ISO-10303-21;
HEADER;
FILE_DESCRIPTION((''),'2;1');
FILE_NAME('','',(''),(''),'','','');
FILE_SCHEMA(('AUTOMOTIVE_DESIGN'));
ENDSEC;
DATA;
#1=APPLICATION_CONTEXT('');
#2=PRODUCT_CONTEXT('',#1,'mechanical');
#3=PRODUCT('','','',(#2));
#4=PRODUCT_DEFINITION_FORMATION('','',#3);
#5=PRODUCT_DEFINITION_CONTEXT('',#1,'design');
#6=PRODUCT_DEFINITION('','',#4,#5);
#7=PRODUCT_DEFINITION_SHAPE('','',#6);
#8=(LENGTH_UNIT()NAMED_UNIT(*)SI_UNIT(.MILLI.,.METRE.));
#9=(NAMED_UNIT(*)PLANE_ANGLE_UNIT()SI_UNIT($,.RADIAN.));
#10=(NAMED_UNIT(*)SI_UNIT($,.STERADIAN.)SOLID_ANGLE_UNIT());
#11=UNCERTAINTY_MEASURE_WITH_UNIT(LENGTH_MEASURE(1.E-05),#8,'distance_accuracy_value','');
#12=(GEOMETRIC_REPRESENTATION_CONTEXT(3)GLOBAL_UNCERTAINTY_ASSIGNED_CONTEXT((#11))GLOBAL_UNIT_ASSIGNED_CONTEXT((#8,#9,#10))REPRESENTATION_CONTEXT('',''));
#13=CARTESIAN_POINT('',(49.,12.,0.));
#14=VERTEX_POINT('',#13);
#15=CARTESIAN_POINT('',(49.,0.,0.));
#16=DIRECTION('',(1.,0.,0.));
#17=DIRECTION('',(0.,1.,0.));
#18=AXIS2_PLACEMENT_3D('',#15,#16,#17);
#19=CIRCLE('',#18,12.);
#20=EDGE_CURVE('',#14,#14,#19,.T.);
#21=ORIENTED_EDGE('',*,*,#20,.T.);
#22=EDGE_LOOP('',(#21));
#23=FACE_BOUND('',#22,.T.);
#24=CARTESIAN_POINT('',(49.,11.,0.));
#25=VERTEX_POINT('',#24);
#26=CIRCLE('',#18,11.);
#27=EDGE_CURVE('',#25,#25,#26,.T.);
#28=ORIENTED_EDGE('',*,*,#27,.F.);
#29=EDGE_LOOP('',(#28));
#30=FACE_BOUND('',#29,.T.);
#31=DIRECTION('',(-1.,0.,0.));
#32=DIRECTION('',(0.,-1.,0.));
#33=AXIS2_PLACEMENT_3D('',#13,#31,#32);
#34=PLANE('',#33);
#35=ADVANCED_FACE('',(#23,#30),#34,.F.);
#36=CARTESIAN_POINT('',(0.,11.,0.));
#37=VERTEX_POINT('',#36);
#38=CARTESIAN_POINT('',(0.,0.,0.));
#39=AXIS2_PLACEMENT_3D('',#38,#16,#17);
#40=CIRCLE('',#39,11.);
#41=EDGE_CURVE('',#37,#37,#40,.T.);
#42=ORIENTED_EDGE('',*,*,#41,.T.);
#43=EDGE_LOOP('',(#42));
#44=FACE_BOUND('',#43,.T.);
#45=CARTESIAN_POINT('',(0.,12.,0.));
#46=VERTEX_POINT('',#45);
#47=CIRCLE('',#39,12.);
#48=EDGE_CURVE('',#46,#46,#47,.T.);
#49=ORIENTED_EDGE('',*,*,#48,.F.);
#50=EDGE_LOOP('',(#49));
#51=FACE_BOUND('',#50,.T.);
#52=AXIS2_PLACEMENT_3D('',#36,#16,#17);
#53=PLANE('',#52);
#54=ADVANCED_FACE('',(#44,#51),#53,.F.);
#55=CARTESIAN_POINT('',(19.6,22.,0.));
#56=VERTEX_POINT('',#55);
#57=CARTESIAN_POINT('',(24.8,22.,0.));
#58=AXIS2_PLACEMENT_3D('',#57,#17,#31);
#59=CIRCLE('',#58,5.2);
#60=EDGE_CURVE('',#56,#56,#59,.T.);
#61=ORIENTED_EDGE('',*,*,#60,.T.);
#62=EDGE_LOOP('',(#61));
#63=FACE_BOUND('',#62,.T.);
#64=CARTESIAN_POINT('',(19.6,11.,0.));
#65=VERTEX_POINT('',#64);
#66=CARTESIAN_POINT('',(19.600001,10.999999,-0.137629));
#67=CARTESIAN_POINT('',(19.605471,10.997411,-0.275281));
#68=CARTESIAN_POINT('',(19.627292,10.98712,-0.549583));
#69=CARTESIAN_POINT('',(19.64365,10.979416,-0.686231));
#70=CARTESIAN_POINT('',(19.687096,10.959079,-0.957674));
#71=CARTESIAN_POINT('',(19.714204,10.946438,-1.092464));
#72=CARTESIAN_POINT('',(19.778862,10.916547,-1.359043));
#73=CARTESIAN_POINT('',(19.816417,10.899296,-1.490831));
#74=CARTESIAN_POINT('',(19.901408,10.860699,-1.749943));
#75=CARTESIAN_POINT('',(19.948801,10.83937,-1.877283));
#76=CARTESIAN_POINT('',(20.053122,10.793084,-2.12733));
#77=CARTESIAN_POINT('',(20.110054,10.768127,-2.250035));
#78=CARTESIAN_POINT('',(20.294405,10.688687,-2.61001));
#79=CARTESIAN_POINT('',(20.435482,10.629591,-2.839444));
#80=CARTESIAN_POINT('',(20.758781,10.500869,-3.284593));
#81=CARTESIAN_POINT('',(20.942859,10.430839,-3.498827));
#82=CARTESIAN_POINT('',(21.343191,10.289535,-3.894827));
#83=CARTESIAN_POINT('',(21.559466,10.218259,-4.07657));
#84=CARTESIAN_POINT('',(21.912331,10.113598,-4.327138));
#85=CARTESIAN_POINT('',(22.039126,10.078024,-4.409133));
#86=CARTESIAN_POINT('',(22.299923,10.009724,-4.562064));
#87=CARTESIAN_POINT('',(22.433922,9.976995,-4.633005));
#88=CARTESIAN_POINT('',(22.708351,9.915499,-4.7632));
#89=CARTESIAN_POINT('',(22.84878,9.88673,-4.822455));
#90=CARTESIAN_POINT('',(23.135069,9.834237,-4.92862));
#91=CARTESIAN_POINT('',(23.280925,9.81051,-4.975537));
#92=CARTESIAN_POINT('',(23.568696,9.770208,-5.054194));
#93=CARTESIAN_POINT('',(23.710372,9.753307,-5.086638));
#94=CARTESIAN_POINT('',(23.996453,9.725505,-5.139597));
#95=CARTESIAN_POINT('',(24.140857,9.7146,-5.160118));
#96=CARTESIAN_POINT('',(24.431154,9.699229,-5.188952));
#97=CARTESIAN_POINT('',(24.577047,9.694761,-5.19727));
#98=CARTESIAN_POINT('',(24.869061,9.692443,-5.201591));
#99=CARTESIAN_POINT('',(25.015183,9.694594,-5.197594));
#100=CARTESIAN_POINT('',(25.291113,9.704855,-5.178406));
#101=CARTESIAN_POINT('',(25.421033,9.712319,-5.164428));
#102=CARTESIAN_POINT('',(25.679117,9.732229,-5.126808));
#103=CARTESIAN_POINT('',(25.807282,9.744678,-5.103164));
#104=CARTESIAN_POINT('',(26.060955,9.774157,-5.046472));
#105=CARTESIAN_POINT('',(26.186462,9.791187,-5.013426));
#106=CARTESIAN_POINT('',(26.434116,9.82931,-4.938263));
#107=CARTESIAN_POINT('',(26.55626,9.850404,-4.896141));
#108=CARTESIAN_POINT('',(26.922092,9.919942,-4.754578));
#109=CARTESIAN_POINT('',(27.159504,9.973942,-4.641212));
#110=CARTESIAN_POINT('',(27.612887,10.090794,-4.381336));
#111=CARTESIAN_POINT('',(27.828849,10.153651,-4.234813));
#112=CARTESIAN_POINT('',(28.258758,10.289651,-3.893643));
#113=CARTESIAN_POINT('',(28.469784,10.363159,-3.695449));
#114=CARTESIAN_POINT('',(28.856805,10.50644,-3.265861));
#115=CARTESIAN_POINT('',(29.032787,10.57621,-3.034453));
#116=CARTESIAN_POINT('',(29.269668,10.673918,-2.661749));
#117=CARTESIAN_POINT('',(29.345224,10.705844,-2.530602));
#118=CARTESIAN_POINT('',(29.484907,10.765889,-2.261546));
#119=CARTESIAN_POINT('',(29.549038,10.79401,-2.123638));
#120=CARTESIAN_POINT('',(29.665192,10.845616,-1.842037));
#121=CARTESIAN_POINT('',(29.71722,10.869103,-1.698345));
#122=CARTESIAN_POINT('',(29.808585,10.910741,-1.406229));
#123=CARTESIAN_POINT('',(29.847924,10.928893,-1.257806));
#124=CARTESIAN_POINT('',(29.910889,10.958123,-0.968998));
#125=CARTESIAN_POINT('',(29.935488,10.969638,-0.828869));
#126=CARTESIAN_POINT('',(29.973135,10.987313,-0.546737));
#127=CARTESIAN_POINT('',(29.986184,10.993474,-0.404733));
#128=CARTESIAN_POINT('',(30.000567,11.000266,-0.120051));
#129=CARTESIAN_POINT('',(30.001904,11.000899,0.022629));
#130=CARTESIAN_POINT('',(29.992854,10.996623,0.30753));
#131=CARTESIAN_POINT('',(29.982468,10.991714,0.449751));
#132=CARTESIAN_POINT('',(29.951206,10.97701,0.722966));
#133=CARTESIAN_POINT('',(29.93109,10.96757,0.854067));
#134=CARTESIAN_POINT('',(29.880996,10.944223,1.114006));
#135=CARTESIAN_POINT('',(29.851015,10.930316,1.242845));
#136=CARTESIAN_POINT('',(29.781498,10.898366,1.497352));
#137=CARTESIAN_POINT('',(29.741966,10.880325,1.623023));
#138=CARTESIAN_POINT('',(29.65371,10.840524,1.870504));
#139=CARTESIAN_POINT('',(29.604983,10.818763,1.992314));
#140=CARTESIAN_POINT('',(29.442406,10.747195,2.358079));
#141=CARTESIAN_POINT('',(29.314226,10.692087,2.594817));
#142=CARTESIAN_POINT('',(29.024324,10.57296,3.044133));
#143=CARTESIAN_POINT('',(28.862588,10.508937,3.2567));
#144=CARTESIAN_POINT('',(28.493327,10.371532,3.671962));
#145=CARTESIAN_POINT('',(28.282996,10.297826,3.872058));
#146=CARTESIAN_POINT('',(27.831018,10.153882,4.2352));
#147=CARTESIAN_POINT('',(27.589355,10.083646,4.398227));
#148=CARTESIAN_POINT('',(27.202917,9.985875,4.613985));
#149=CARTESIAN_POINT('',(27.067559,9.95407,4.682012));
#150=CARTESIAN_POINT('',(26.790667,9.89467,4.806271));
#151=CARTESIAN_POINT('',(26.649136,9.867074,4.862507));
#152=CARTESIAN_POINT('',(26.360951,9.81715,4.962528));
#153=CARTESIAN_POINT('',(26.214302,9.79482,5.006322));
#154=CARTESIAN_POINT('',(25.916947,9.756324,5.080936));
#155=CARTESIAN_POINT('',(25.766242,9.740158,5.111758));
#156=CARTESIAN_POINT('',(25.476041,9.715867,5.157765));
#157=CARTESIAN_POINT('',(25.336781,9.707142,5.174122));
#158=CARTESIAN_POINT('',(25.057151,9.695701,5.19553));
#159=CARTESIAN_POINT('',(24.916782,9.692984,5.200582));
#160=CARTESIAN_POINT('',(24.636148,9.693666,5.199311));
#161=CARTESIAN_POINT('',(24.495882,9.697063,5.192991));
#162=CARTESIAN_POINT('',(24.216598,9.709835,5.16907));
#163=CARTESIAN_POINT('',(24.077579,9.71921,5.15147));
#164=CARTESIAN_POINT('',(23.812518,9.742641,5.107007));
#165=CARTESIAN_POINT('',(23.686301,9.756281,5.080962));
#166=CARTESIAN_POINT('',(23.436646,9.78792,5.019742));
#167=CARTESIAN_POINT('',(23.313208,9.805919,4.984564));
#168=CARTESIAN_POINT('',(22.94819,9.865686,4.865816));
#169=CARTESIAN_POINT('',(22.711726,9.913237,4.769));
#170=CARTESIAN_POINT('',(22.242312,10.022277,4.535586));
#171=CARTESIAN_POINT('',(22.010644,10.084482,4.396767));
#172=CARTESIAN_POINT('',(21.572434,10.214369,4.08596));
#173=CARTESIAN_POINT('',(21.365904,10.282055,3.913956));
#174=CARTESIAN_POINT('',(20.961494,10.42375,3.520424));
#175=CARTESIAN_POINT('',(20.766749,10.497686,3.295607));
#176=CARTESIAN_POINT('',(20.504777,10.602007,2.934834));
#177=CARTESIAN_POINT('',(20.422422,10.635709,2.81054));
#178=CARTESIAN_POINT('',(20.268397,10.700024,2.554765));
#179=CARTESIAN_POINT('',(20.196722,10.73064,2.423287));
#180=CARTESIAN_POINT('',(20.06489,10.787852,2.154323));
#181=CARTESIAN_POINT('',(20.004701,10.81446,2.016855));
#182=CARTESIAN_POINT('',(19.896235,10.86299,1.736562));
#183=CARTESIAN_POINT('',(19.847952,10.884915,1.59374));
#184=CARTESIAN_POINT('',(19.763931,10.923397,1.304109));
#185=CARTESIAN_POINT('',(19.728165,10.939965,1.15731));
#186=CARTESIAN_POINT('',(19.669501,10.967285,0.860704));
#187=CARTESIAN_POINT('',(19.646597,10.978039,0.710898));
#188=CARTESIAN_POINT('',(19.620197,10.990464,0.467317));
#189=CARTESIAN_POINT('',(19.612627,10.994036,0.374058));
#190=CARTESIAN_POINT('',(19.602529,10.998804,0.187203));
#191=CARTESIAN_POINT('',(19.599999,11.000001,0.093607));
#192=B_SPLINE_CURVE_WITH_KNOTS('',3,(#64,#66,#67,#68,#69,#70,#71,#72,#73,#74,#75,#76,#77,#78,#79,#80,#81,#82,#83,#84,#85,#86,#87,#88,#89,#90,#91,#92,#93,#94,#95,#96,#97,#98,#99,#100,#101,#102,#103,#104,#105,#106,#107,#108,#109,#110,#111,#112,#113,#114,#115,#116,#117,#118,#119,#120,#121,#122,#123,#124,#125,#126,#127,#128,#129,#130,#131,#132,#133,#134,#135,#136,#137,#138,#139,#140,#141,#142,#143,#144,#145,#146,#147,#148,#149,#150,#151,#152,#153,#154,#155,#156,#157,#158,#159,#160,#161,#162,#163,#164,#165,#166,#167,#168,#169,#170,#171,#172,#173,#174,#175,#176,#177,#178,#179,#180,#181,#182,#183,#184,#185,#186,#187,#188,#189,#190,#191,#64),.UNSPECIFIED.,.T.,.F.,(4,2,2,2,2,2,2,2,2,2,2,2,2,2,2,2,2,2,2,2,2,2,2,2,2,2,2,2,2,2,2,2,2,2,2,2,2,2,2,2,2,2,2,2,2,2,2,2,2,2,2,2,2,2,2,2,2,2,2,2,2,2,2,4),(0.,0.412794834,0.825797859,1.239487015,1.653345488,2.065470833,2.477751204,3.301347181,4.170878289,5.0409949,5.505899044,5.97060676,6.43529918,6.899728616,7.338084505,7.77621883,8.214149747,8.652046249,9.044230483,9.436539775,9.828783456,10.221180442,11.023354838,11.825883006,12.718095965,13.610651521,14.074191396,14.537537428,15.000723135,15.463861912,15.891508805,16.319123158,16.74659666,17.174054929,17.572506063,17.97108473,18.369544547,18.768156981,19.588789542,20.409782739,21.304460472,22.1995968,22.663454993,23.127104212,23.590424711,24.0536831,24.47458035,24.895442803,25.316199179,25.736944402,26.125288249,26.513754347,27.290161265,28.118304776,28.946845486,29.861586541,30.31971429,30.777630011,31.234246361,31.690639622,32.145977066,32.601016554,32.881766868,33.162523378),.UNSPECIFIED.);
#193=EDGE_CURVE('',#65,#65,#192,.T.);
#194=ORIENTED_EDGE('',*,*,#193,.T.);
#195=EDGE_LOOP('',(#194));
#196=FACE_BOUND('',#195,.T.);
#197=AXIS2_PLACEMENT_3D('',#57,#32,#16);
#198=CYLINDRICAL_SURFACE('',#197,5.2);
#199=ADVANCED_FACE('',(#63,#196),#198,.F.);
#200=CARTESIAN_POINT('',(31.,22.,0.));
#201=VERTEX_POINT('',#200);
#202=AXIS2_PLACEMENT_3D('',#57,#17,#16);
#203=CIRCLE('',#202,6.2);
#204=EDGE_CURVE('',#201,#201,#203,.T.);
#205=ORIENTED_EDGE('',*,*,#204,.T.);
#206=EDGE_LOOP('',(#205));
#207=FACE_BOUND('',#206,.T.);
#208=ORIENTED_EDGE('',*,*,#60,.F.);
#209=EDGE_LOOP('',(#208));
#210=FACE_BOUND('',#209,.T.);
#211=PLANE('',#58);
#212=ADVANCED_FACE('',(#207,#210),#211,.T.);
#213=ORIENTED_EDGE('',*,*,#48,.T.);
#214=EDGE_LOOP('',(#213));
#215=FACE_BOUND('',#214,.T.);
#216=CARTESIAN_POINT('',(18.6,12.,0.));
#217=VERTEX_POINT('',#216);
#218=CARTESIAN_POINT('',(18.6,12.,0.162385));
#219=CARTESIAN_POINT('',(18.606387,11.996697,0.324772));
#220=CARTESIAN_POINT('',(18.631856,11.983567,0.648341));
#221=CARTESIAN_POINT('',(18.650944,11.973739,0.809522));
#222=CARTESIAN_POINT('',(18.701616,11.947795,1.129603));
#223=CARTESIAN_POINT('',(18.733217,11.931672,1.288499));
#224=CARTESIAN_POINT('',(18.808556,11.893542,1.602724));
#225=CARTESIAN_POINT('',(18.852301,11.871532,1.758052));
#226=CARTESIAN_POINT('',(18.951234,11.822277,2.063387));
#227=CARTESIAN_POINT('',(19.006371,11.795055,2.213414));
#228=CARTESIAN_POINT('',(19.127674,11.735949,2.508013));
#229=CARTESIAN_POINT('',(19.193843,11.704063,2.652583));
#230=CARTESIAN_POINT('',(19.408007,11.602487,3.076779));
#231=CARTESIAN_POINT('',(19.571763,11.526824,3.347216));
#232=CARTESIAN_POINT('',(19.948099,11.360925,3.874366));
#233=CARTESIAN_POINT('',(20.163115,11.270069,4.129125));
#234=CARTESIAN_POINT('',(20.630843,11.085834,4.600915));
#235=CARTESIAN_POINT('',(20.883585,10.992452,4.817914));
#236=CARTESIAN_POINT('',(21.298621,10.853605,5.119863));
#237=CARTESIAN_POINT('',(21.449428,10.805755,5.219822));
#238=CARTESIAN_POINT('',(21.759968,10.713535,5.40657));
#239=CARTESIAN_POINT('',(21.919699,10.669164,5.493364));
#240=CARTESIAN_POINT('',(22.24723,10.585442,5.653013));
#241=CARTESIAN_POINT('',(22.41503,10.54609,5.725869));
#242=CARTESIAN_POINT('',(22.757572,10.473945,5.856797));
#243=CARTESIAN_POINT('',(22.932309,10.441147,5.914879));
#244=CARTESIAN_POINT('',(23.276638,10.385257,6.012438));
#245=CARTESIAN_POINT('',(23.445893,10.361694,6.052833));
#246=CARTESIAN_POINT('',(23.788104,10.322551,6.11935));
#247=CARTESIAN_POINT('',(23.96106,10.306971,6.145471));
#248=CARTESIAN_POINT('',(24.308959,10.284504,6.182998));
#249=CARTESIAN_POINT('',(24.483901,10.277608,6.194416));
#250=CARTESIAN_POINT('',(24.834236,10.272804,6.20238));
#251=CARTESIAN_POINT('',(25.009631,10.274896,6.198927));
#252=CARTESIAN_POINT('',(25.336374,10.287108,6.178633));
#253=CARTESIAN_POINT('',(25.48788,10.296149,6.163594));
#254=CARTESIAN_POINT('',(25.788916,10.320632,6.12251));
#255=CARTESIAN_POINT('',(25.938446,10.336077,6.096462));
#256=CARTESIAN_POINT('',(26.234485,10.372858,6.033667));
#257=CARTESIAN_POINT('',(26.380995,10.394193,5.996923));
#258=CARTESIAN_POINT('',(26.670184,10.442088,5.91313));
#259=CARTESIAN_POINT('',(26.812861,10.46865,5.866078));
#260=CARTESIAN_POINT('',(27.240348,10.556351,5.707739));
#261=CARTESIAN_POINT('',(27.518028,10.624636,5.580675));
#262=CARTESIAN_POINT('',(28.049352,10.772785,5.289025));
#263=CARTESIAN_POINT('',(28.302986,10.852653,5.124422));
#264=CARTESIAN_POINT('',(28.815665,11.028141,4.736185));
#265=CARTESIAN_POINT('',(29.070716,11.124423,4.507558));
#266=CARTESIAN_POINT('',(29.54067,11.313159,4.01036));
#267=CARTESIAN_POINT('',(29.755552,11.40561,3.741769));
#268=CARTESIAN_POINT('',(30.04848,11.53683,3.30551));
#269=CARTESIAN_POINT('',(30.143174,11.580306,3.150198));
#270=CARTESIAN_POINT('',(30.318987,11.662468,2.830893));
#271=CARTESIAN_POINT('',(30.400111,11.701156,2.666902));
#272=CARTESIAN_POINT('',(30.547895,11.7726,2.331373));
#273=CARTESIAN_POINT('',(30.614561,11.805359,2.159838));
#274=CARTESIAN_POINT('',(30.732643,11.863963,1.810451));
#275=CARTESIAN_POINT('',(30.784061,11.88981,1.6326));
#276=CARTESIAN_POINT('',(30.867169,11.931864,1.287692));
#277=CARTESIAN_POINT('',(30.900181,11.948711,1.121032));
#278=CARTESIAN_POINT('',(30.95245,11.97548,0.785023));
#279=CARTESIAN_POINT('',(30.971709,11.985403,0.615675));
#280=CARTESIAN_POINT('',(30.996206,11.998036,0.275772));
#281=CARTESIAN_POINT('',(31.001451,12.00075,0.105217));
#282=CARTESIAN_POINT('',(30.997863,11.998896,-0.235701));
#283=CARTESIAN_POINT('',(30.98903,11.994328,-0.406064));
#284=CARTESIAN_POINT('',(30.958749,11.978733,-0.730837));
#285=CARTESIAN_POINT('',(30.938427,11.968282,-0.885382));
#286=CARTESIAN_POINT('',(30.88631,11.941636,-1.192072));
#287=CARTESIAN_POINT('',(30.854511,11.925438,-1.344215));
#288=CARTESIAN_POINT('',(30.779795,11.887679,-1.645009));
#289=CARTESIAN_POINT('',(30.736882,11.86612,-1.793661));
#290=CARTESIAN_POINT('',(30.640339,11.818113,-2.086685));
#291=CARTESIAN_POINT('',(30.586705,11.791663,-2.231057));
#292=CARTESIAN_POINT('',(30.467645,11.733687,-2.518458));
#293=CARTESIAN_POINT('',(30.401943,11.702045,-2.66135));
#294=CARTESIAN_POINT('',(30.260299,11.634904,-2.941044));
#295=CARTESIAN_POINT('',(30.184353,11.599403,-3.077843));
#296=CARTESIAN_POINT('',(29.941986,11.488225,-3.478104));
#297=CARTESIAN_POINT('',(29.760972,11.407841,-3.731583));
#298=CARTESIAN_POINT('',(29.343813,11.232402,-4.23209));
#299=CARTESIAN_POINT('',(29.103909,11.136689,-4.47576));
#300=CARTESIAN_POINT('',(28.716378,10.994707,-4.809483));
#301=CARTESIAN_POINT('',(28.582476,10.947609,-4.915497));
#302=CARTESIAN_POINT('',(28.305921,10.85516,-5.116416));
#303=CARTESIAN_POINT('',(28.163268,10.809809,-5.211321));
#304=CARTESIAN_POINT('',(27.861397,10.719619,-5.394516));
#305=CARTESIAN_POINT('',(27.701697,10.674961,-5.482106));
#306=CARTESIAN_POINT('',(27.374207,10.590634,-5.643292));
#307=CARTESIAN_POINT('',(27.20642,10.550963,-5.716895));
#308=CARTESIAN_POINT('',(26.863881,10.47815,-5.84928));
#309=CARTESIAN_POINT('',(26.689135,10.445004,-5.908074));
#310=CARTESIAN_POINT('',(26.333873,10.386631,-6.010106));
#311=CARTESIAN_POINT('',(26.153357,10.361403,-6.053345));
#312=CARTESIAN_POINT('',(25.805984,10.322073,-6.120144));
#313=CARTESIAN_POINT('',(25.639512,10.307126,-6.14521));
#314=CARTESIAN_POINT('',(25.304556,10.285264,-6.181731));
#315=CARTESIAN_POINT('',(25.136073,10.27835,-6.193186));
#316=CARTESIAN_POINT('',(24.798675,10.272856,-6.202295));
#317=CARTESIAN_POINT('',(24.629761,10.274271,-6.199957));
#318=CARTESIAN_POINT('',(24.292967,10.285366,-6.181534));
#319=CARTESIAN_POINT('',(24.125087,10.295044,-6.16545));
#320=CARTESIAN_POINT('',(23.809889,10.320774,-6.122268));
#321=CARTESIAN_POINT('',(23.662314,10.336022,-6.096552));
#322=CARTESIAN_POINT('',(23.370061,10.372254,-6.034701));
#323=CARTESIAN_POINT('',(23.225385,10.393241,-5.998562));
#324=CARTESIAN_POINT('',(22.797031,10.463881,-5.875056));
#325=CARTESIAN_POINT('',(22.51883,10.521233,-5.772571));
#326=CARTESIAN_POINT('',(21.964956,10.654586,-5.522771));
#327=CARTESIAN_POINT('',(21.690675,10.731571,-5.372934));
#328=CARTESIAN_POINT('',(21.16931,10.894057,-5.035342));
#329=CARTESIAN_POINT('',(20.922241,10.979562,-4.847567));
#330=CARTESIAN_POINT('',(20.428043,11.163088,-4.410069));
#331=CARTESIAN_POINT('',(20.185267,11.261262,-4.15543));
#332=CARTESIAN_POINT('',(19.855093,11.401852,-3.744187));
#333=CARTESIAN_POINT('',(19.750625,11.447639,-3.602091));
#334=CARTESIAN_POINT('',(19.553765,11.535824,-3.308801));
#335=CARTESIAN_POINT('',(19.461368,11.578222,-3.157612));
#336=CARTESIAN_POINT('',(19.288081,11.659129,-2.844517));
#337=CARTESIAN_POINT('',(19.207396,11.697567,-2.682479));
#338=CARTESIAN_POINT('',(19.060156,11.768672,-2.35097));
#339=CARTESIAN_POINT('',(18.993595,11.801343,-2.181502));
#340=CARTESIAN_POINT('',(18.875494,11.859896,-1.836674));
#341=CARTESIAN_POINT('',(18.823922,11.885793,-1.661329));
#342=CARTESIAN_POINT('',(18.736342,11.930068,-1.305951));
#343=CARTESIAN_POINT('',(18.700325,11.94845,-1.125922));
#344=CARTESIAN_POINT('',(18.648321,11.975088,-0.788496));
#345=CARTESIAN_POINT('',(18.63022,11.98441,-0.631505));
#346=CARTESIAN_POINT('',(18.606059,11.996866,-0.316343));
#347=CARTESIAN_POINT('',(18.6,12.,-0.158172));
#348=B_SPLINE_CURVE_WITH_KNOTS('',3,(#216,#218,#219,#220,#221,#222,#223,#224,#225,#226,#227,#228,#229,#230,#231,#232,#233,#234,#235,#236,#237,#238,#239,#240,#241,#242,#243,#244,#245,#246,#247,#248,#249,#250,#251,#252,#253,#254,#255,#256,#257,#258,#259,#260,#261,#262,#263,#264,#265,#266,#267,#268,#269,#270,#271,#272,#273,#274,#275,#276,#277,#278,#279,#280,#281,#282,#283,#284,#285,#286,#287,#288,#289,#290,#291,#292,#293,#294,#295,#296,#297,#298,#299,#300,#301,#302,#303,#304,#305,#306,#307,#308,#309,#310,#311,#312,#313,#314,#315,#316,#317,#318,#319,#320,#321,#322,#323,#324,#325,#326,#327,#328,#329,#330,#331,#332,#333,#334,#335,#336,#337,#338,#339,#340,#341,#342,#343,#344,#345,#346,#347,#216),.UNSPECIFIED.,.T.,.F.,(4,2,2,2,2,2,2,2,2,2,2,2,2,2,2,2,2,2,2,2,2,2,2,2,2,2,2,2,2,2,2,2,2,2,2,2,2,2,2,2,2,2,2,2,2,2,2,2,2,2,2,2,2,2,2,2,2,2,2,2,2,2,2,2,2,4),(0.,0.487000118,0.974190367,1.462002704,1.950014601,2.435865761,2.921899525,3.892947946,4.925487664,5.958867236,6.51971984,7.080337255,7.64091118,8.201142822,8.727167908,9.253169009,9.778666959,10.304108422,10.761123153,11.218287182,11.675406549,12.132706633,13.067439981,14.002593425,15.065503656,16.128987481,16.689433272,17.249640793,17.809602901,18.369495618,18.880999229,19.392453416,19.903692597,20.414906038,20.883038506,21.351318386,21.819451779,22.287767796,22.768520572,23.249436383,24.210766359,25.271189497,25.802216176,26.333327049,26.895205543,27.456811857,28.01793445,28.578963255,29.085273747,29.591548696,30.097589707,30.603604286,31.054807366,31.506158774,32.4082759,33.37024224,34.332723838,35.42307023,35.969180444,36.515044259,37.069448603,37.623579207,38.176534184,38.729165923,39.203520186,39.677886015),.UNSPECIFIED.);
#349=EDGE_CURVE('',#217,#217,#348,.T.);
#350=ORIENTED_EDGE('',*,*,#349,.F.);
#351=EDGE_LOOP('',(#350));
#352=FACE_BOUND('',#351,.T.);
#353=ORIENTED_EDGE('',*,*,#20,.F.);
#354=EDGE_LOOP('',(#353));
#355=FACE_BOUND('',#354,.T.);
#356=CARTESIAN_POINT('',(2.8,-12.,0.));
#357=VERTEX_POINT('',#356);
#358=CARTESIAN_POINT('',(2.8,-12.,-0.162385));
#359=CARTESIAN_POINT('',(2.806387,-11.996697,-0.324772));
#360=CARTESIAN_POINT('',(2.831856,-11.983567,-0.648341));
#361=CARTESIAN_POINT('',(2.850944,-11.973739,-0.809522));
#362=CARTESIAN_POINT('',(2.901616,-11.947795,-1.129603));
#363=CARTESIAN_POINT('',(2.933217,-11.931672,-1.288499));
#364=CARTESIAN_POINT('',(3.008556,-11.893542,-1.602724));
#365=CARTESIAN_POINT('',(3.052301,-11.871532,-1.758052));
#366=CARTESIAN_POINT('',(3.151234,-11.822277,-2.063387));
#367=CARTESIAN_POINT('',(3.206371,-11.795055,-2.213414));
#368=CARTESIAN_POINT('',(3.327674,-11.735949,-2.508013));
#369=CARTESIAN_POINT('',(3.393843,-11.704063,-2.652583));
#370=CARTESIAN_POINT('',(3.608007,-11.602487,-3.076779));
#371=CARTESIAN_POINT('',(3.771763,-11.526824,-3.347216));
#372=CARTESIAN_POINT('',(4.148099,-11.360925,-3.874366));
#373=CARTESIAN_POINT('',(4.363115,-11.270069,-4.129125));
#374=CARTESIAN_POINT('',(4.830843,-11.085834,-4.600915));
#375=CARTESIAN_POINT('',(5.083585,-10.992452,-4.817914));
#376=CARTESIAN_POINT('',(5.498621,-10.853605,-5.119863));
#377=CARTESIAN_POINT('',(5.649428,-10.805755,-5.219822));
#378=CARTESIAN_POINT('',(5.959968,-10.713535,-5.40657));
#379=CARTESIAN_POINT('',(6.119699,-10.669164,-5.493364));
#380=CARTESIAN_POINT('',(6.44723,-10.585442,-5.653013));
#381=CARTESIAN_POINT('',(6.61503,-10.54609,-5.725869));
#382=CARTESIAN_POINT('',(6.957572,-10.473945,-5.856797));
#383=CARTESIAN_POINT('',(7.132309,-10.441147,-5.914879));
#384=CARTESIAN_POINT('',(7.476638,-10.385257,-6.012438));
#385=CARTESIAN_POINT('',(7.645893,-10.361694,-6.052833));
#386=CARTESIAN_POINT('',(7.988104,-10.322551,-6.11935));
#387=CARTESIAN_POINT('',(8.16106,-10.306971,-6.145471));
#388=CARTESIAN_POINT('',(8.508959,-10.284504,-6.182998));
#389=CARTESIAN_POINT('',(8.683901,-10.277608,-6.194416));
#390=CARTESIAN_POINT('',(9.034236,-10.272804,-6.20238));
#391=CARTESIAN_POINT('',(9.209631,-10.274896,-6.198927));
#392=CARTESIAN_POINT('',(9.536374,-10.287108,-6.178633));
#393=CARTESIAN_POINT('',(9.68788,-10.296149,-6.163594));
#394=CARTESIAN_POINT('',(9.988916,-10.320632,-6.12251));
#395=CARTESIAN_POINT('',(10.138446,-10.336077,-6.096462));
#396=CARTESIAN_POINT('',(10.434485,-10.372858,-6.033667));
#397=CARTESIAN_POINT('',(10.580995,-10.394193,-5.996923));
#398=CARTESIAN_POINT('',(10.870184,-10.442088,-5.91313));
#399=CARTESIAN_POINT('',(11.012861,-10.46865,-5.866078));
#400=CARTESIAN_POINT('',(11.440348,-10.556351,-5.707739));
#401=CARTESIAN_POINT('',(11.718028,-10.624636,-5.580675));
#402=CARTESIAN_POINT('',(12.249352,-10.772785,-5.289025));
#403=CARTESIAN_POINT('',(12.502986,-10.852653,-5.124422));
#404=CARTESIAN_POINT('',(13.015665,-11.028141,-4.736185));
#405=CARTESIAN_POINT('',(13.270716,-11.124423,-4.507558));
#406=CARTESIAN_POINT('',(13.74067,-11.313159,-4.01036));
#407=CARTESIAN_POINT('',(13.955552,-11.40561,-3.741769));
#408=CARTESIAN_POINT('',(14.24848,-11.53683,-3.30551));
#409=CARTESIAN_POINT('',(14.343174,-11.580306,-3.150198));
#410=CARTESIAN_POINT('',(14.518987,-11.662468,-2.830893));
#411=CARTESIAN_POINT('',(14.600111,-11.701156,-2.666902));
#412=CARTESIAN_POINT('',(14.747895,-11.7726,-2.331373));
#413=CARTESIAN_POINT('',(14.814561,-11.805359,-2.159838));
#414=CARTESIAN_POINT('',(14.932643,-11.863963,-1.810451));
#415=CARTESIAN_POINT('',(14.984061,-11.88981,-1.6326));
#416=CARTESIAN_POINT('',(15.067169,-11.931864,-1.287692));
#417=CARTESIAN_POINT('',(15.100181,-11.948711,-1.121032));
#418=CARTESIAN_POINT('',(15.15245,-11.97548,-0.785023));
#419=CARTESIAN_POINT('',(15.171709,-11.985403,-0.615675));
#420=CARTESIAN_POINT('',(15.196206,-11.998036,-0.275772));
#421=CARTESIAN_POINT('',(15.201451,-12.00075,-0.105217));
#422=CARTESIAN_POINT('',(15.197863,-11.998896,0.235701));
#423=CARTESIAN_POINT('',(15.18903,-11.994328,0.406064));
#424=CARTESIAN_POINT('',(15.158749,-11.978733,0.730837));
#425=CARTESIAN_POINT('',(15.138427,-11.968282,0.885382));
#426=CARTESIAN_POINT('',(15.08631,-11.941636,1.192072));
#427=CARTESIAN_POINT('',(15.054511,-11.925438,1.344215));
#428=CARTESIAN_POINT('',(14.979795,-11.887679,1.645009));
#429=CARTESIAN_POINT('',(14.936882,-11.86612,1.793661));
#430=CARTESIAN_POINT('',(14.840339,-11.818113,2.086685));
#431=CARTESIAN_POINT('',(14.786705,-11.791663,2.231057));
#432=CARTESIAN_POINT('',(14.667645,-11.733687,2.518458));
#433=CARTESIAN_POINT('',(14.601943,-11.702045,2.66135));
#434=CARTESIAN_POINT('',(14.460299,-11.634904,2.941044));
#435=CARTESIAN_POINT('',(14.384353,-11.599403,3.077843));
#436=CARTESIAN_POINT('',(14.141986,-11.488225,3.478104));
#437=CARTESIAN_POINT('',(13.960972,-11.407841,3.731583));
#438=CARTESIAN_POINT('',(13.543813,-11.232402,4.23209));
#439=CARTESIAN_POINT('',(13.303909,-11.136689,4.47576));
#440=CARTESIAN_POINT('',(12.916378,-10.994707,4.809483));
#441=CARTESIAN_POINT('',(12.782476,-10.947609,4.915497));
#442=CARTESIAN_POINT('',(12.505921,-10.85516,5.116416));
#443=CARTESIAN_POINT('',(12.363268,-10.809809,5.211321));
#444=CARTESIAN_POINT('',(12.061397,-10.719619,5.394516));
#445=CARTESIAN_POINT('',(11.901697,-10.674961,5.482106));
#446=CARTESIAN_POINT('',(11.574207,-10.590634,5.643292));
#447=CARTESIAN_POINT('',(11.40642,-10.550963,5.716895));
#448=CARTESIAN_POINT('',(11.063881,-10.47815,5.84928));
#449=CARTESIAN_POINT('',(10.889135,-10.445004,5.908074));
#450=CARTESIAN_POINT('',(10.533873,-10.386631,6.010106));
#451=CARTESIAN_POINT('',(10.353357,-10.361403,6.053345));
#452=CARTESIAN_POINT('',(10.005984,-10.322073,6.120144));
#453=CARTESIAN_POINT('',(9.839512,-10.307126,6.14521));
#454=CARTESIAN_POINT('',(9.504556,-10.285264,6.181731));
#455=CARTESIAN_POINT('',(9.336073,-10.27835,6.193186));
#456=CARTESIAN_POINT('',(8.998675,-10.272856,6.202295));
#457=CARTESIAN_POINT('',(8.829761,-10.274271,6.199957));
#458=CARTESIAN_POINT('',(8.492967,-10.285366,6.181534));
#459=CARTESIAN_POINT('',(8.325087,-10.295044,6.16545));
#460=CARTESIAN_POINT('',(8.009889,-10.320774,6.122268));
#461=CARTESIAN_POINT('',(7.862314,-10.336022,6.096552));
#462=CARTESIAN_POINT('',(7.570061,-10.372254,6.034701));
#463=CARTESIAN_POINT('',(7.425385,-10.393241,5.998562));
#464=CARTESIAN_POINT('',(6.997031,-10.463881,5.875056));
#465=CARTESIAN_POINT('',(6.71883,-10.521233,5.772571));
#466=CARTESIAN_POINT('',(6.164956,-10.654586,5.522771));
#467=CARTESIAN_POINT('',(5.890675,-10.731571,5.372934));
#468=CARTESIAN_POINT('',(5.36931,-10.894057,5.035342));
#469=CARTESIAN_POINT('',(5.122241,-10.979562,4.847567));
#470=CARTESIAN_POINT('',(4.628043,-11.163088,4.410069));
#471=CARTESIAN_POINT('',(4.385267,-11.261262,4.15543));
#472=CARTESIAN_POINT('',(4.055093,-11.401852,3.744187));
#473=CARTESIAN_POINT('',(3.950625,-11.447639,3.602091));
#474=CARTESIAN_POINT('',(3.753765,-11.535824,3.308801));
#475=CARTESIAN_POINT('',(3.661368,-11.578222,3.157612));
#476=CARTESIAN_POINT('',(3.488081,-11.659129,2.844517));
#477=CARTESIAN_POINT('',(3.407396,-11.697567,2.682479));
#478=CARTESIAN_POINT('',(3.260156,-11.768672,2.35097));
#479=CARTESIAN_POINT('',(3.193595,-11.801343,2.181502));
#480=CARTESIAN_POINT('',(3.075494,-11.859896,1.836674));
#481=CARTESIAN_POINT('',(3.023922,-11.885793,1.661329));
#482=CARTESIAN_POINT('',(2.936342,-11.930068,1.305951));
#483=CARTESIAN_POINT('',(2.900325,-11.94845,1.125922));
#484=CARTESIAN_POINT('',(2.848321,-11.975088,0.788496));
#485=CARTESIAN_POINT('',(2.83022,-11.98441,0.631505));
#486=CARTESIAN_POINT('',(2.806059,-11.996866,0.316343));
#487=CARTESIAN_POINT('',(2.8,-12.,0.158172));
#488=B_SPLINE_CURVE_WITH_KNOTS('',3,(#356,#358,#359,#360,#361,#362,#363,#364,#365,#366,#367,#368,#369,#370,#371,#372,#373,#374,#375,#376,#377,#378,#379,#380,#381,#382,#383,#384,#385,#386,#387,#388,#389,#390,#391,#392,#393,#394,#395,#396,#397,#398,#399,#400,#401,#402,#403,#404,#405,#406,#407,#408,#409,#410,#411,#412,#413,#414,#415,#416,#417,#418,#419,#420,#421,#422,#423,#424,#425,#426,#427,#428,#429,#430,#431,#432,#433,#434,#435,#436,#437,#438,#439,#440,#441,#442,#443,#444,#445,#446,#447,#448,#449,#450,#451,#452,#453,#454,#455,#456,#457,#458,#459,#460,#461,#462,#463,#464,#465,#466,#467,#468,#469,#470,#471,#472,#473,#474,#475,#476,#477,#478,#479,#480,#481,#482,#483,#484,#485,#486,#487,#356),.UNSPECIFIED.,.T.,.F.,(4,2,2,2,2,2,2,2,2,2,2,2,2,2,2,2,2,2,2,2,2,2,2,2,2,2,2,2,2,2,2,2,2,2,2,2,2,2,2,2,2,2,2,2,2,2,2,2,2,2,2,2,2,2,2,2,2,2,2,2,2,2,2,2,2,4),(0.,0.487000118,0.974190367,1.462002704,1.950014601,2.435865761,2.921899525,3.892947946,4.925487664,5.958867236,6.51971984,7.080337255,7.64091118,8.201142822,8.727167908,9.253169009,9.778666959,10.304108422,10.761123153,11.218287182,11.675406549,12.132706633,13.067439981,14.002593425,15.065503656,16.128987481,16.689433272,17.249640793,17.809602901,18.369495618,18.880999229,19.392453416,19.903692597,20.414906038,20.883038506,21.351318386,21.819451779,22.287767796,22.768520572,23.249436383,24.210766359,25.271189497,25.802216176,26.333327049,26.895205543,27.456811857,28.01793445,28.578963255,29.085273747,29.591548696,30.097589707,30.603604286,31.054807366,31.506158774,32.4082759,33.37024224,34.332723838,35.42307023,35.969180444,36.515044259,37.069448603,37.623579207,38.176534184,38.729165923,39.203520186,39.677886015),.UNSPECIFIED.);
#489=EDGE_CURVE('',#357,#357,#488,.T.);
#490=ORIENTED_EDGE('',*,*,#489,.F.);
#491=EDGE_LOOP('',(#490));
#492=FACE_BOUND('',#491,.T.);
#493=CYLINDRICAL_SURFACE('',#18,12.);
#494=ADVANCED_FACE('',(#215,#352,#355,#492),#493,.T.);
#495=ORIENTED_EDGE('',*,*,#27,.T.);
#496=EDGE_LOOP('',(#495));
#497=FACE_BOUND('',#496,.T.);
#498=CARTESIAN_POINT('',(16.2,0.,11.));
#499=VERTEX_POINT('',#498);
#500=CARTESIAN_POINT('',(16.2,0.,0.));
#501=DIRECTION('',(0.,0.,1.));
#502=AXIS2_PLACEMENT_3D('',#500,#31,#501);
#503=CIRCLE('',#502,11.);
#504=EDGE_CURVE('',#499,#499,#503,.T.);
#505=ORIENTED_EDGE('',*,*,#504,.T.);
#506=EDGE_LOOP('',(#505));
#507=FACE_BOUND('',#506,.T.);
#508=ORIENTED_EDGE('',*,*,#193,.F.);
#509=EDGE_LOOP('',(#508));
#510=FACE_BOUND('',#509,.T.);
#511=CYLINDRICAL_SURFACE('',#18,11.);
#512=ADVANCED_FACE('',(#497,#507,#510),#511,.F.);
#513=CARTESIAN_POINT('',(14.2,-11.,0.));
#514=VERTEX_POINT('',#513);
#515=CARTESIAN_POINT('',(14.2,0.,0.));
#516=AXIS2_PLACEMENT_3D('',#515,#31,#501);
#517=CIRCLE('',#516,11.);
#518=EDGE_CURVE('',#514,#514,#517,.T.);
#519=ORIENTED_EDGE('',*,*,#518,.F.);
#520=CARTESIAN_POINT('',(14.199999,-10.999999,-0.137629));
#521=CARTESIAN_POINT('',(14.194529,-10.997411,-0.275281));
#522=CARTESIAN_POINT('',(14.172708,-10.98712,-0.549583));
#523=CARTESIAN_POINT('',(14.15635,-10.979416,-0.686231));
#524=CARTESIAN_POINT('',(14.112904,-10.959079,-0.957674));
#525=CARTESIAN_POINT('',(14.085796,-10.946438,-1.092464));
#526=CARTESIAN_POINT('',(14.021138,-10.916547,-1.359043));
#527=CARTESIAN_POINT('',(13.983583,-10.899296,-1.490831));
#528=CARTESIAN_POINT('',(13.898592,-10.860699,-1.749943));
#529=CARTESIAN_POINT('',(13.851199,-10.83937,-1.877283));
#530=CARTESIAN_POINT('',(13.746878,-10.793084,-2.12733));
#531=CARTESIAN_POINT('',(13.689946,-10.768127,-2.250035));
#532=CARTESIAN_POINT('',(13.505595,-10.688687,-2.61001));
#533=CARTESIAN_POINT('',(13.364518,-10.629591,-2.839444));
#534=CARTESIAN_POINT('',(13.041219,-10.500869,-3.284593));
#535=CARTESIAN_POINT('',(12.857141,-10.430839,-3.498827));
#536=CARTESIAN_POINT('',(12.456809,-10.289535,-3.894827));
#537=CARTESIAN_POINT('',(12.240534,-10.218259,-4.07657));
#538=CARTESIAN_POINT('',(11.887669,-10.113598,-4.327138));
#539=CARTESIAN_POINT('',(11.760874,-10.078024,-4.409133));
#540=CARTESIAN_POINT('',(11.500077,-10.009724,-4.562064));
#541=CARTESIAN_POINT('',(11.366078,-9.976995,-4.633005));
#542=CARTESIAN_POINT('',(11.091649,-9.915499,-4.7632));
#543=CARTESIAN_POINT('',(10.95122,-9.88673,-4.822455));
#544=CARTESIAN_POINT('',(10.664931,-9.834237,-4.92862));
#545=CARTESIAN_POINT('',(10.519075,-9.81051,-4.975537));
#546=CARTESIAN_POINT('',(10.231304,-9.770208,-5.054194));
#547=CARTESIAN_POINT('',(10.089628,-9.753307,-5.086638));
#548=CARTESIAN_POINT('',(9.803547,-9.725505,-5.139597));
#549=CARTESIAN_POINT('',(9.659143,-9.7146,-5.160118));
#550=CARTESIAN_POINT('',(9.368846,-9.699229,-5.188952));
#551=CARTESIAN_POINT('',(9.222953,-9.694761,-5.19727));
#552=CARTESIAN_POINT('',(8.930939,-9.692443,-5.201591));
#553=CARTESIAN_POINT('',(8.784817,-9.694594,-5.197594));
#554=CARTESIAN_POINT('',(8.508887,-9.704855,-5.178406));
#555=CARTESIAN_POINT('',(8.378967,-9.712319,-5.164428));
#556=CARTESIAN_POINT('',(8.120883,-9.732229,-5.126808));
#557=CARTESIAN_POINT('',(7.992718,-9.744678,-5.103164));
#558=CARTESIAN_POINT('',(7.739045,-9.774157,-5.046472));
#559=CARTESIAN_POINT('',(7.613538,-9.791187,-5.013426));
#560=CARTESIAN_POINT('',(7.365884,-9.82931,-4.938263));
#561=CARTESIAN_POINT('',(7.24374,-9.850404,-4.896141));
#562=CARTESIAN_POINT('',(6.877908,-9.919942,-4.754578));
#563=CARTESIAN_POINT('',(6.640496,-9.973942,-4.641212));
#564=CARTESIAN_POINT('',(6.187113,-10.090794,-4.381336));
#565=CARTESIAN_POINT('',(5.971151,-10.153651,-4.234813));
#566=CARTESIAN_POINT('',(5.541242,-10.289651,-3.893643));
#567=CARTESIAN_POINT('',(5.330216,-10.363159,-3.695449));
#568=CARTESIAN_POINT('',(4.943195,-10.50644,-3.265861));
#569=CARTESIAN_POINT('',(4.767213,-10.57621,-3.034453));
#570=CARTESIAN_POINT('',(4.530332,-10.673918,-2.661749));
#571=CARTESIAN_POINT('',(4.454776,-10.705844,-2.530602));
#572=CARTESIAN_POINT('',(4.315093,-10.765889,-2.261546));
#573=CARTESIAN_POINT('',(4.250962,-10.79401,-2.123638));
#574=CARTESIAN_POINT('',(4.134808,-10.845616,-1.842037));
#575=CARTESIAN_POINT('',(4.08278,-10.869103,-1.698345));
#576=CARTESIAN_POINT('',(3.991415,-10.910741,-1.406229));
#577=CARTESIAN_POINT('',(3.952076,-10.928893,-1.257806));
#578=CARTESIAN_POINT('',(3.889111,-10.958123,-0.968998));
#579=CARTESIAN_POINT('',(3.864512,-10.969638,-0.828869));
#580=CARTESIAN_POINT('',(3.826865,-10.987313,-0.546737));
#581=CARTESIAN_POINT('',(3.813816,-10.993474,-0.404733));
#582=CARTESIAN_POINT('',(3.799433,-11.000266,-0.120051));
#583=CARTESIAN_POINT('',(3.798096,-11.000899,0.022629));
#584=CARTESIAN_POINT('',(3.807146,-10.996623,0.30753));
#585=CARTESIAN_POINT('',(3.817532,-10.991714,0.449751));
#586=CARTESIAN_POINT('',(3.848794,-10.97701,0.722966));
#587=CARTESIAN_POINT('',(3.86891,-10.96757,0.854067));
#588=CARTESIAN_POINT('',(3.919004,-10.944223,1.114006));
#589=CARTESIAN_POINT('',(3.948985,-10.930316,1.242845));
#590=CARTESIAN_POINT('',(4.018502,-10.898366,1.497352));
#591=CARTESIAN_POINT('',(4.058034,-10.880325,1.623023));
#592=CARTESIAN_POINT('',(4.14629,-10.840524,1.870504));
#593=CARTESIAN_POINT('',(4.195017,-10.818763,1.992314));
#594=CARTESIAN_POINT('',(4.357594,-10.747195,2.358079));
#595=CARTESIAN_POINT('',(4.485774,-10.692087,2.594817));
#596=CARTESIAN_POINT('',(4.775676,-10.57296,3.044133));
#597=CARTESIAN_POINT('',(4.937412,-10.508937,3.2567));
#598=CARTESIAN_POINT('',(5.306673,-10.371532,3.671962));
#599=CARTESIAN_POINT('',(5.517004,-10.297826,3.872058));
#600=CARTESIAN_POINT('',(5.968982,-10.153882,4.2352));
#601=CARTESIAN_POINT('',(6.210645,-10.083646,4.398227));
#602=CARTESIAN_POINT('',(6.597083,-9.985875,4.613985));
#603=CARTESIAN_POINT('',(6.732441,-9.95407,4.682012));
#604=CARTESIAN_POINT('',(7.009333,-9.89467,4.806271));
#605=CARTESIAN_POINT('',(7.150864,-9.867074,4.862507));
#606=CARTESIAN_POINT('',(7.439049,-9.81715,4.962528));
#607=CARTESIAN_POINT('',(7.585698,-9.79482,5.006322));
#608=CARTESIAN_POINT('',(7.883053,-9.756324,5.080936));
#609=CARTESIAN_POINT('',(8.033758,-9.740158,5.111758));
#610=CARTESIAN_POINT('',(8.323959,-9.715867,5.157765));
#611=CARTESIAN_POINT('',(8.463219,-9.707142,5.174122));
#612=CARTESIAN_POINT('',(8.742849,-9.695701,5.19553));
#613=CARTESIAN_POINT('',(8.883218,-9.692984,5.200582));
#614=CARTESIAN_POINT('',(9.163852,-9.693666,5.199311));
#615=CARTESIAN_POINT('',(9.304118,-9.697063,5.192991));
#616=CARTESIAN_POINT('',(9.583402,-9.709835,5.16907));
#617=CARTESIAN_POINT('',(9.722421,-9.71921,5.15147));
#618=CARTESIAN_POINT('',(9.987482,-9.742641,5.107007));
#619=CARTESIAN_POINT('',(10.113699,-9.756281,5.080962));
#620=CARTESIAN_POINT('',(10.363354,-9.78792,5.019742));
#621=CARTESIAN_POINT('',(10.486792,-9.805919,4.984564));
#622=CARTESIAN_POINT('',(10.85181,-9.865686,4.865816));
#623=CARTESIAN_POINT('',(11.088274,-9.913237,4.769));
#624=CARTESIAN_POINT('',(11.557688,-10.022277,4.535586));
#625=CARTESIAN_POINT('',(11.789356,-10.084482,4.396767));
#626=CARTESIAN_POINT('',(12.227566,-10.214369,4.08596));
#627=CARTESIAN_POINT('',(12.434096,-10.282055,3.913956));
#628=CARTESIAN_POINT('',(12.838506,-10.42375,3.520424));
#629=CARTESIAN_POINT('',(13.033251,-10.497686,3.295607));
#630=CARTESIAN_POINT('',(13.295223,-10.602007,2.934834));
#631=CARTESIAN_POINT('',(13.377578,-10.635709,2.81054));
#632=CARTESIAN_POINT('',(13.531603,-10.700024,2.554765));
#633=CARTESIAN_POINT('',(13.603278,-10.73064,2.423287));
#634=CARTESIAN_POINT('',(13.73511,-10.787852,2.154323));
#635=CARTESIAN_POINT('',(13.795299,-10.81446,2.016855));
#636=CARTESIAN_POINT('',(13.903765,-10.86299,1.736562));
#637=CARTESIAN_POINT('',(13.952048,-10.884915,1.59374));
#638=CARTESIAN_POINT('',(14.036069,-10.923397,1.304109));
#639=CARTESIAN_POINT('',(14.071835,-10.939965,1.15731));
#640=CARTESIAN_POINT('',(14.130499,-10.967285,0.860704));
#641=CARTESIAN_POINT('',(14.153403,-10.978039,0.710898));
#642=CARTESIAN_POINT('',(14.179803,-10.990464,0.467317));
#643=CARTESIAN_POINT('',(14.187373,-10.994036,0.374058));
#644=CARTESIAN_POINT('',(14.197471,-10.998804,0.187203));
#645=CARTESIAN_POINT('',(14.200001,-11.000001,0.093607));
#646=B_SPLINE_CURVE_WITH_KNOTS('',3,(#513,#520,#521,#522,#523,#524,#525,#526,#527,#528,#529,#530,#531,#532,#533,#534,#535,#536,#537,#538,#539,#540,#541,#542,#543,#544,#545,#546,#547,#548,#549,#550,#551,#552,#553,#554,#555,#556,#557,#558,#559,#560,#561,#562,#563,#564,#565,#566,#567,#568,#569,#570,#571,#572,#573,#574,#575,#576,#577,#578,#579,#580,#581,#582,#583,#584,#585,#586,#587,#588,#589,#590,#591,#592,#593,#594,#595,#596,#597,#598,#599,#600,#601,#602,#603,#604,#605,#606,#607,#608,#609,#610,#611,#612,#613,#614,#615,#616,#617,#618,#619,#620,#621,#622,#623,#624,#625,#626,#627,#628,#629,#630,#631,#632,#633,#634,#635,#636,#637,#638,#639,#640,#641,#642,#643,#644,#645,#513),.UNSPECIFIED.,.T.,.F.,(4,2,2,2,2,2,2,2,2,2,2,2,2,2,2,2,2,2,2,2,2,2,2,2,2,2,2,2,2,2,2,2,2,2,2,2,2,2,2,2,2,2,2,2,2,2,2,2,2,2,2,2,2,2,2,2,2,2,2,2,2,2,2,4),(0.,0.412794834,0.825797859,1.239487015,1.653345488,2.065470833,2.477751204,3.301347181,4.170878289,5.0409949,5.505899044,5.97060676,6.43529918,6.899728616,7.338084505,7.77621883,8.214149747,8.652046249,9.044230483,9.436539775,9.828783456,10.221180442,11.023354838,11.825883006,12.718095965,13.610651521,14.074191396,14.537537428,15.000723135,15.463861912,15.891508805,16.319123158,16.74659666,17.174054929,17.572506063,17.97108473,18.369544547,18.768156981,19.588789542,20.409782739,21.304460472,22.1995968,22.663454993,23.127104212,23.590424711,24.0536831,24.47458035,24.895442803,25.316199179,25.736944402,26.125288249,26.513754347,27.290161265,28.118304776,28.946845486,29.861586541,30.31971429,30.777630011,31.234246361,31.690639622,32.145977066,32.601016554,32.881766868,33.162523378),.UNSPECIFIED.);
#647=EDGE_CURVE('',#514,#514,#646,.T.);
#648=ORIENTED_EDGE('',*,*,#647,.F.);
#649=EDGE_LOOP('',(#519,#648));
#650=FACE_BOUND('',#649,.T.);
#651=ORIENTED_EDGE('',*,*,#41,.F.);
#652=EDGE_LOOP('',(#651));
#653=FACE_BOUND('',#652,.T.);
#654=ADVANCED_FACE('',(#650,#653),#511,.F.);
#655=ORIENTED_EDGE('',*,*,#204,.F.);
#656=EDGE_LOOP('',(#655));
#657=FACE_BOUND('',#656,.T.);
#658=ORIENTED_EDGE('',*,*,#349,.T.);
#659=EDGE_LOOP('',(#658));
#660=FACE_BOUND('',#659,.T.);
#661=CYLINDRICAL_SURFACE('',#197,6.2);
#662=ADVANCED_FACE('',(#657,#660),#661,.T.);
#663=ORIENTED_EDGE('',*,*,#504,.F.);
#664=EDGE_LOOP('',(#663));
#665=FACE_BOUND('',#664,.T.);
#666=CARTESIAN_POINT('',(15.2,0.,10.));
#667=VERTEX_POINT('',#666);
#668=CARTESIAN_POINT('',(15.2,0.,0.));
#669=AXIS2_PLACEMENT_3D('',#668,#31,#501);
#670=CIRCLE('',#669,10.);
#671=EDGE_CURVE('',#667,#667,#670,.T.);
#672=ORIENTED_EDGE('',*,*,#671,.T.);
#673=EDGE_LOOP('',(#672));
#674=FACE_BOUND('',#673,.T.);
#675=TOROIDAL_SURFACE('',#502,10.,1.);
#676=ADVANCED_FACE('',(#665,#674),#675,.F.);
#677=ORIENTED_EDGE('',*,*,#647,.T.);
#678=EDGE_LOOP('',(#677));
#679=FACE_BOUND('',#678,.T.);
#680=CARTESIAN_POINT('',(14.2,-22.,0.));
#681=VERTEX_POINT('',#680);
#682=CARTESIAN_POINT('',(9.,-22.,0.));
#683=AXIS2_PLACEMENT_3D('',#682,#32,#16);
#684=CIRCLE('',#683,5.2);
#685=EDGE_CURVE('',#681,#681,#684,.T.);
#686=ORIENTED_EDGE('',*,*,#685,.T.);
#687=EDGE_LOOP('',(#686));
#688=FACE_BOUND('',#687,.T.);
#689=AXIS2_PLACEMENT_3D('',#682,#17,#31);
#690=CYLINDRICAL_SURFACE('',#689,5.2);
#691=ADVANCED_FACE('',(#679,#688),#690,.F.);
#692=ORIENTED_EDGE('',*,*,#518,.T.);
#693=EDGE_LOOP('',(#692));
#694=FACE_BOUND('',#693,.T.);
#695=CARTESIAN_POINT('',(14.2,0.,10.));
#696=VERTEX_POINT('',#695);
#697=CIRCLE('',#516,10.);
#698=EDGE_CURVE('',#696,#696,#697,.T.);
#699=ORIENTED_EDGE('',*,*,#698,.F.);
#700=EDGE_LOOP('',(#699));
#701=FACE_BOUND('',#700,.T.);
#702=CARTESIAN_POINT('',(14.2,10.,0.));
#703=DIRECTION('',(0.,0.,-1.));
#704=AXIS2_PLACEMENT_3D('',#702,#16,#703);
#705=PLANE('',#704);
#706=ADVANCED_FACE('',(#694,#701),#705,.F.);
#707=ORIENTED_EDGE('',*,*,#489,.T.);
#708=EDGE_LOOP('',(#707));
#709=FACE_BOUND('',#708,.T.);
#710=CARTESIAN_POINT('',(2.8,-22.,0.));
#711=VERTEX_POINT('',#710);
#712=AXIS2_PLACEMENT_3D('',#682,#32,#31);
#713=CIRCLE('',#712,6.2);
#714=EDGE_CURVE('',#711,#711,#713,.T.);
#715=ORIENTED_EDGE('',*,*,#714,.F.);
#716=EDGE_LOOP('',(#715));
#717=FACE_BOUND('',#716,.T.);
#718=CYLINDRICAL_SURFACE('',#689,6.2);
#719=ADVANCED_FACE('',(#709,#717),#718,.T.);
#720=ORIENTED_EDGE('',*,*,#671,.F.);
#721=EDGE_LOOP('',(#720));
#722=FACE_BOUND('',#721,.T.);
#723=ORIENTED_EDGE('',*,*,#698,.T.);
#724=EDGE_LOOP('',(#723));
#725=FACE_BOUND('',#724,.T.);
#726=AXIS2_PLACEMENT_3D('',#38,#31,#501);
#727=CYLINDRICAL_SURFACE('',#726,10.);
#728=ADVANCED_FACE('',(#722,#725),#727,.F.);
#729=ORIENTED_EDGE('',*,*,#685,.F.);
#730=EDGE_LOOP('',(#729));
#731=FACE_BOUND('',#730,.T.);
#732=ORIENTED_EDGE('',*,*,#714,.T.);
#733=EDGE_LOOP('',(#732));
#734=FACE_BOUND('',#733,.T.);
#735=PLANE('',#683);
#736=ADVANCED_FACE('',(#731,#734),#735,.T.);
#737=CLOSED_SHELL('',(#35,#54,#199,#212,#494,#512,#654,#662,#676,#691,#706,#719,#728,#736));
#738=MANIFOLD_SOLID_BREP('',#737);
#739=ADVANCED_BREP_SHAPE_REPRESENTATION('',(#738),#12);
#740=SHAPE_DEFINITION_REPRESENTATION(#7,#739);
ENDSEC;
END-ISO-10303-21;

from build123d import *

# Parameters (mm, degrees)
SCHIZZO1_W                            = 49
SCHIZZO1_H                            = 1
ESTRUSIONE_SOTTILE1_REACH             = 57.866
ESTRUSIONE_SOTTILE1_END_RADIUS        = 12
SCHIZZO2_R                            = 6.2
SCHIZZO2_R_2                          = 5.2
ESTRUSIONE_SOTTILE1_DIRECTION_2_DEPTH = 10
ESTRUSIONE_SOTTILE2_REACH             = 62.836
ESTRUSIONE_SOTTILE2_END_RADIUS        = 12
SCHIZZO3_R                            = 6.2
SCHIZZO3_R_2                          = 5.2
ESTRUSIONE_SOTTILE2_DIRECTION_2_DEPTH = 10
SCHIZZO4_R                            = 5.2
TAGLIO_ESTRUSIONE2_DEPTH              = 15
SCHIZZO5_R                            = 5.2
TAGLIO_ESTRUSIONE3_DEPTH              = 15
SCHIZZO6_W                            = 1
SCHIZZO6_H                            = 1
RACCORDO1_R                           = 1


with BuildPart() as part:
    # Schizzo1 → Rivoluzione-Sottile2 (revolve)
    with BuildSketch(Plane.XY):
        with Locations((24.5, 11.5)):
            Rectangle(SCHIZZO1_W, SCHIZZO1_H)
    revolve(axis=Axis((49, 0, 0), (-1, 0, 0)))

    # Estrusione-Sottile1: up to this cylinder (the profile starts outside it)
    estrusione_sottile1_end = Plane(origin=(15.024638, 0, 0), z_dir=(1, 0, 0)) * Cylinder(ESTRUSIONE_SOTTILE1_END_RADIUS, 140.732, mode=Mode.PRIVATE)
    # Schizzo2 → Estrusione-Sottile1 (add, up to the surface)
    with BuildSketch(Plane(origin=(0, -12, 0), x_dir=(-1, 0, 0), z_dir=(0, -1, 0)), mode=Mode.PRIVATE) as estrusione_sottile1_sk1:
        with Locations((-9, 0)):
            Circle(SCHIZZO2_R)
        with Locations((-9, 0)):
            Circle(SCHIZZO2_R_2, mode=Mode.SUBTRACT)
    estrusione_sottile1_tool1 = extrude(estrusione_sottile1_sk1.sketch, amount=-ESTRUSIONE_SOTTILE1_REACH, mode=Mode.PRIVATE) - estrusione_sottile1_end
    add(estrusione_sottile1_tool1.solids().sort_by_distance((15.024638, -12, 0))[0])
    add(estrusione_sottile1_tool1.solids().sort_by_distance((15.024638, -12, 0))[1])

    # Schizzo2 → Estrusione-Sottile1 direction 2 (add)
    with BuildSketch(Plane(origin=(0, -12, 0), x_dir=(-1, 0, 0), z_dir=(0, -1, 0))):
        with Locations((-9, 0)):
            Circle(SCHIZZO2_R)
        with Locations((-9, 0)):
            Circle(SCHIZZO2_R_2, mode=Mode.SUBTRACT)
    extrude(amount=ESTRUSIONE_SOTTILE1_DIRECTION_2_DEPTH)

    # Estrusione-Sottile2: up to this cylinder (the profile starts outside it)
    estrusione_sottile2_end = Plane(origin=(18.775362, 0, 0), z_dir=(1, 0, 0)) * Cylinder(ESTRUSIONE_SOTTILE2_END_RADIUS, 150.672, mode=Mode.PRIVATE)
    # Schizzo3 → Estrusione-Sottile2 (add, up to the surface)
    with BuildSketch(Plane(origin=(0, 12, 0), x_dir=(1, 0, 0), z_dir=(0, 1, 0)), mode=Mode.PRIVATE) as estrusione_sottile2_sk1:
        with Locations((24.8, 0)):
            Circle(SCHIZZO3_R)
        with Locations((24.8, 0)):
            Circle(SCHIZZO3_R_2, mode=Mode.SUBTRACT)
    estrusione_sottile2_tool1 = extrude(estrusione_sottile2_sk1.sketch, amount=-ESTRUSIONE_SOTTILE2_REACH, mode=Mode.PRIVATE) - estrusione_sottile2_end
    add(estrusione_sottile2_tool1.solids().sort_by_distance((18.775362, 12, 0))[0])
    add(estrusione_sottile2_tool1.solids().sort_by_distance((18.775362, 12, 0))[1])

    # Schizzo3 → Estrusione-Sottile2 direction 2 (add)
    with BuildSketch(Plane(origin=(0, 12, 0), x_dir=(1, 0, 0), z_dir=(0, 1, 0))):
        with Locations((24.8, 0)):
            Circle(SCHIZZO3_R)
        with Locations((24.8, 0)):
            Circle(SCHIZZO3_R_2, mode=Mode.SUBTRACT)
    extrude(amount=ESTRUSIONE_SOTTILE2_DIRECTION_2_DEPTH)

    # Schizzo4 → Taglio-Estrusione2 (cut)
    with BuildSketch(Plane.XZ.offset(22)):
        with Locations((9, 0)):
            Circle(SCHIZZO4_R)
    extrude(amount=-TAGLIO_ESTRUSIONE2_DEPTH, mode=Mode.SUBTRACT)

    # Schizzo5 → Taglio-Estrusione3 (cut)
    with BuildSketch(Plane(origin=(0, 22, 0), x_dir=(1, 0, 0), z_dir=(0, 1, 0))):
        with Locations(Location((24.8, 0, 0), (0, 0, 180))):
            Circle(SCHIZZO5_R)
    extrude(amount=-TAGLIO_ESTRUSIONE3_DEPTH, mode=Mode.SUBTRACT)

    # Schizzo6 → Rivoluzione1 (revolve)
    with BuildSketch(Plane.XY):
        with Locations((14.7, 10.5)):
            Rectangle(SCHIZZO6_W, SCHIZZO6_H)
    revolve(axis=Axis((0, 0, 0), (1, 0, 0)))

    # Raccordo1
    raccordo1_edges = [part.edges().sort_by_distance(p)[0] for p in [
        (15.2, -11, 0),
    ]]
    fillet(raccordo1_edges, radius=RACCORDO1_R - 0.0001)  # a hair under: the kernel refuses the full size


solid = part.part
